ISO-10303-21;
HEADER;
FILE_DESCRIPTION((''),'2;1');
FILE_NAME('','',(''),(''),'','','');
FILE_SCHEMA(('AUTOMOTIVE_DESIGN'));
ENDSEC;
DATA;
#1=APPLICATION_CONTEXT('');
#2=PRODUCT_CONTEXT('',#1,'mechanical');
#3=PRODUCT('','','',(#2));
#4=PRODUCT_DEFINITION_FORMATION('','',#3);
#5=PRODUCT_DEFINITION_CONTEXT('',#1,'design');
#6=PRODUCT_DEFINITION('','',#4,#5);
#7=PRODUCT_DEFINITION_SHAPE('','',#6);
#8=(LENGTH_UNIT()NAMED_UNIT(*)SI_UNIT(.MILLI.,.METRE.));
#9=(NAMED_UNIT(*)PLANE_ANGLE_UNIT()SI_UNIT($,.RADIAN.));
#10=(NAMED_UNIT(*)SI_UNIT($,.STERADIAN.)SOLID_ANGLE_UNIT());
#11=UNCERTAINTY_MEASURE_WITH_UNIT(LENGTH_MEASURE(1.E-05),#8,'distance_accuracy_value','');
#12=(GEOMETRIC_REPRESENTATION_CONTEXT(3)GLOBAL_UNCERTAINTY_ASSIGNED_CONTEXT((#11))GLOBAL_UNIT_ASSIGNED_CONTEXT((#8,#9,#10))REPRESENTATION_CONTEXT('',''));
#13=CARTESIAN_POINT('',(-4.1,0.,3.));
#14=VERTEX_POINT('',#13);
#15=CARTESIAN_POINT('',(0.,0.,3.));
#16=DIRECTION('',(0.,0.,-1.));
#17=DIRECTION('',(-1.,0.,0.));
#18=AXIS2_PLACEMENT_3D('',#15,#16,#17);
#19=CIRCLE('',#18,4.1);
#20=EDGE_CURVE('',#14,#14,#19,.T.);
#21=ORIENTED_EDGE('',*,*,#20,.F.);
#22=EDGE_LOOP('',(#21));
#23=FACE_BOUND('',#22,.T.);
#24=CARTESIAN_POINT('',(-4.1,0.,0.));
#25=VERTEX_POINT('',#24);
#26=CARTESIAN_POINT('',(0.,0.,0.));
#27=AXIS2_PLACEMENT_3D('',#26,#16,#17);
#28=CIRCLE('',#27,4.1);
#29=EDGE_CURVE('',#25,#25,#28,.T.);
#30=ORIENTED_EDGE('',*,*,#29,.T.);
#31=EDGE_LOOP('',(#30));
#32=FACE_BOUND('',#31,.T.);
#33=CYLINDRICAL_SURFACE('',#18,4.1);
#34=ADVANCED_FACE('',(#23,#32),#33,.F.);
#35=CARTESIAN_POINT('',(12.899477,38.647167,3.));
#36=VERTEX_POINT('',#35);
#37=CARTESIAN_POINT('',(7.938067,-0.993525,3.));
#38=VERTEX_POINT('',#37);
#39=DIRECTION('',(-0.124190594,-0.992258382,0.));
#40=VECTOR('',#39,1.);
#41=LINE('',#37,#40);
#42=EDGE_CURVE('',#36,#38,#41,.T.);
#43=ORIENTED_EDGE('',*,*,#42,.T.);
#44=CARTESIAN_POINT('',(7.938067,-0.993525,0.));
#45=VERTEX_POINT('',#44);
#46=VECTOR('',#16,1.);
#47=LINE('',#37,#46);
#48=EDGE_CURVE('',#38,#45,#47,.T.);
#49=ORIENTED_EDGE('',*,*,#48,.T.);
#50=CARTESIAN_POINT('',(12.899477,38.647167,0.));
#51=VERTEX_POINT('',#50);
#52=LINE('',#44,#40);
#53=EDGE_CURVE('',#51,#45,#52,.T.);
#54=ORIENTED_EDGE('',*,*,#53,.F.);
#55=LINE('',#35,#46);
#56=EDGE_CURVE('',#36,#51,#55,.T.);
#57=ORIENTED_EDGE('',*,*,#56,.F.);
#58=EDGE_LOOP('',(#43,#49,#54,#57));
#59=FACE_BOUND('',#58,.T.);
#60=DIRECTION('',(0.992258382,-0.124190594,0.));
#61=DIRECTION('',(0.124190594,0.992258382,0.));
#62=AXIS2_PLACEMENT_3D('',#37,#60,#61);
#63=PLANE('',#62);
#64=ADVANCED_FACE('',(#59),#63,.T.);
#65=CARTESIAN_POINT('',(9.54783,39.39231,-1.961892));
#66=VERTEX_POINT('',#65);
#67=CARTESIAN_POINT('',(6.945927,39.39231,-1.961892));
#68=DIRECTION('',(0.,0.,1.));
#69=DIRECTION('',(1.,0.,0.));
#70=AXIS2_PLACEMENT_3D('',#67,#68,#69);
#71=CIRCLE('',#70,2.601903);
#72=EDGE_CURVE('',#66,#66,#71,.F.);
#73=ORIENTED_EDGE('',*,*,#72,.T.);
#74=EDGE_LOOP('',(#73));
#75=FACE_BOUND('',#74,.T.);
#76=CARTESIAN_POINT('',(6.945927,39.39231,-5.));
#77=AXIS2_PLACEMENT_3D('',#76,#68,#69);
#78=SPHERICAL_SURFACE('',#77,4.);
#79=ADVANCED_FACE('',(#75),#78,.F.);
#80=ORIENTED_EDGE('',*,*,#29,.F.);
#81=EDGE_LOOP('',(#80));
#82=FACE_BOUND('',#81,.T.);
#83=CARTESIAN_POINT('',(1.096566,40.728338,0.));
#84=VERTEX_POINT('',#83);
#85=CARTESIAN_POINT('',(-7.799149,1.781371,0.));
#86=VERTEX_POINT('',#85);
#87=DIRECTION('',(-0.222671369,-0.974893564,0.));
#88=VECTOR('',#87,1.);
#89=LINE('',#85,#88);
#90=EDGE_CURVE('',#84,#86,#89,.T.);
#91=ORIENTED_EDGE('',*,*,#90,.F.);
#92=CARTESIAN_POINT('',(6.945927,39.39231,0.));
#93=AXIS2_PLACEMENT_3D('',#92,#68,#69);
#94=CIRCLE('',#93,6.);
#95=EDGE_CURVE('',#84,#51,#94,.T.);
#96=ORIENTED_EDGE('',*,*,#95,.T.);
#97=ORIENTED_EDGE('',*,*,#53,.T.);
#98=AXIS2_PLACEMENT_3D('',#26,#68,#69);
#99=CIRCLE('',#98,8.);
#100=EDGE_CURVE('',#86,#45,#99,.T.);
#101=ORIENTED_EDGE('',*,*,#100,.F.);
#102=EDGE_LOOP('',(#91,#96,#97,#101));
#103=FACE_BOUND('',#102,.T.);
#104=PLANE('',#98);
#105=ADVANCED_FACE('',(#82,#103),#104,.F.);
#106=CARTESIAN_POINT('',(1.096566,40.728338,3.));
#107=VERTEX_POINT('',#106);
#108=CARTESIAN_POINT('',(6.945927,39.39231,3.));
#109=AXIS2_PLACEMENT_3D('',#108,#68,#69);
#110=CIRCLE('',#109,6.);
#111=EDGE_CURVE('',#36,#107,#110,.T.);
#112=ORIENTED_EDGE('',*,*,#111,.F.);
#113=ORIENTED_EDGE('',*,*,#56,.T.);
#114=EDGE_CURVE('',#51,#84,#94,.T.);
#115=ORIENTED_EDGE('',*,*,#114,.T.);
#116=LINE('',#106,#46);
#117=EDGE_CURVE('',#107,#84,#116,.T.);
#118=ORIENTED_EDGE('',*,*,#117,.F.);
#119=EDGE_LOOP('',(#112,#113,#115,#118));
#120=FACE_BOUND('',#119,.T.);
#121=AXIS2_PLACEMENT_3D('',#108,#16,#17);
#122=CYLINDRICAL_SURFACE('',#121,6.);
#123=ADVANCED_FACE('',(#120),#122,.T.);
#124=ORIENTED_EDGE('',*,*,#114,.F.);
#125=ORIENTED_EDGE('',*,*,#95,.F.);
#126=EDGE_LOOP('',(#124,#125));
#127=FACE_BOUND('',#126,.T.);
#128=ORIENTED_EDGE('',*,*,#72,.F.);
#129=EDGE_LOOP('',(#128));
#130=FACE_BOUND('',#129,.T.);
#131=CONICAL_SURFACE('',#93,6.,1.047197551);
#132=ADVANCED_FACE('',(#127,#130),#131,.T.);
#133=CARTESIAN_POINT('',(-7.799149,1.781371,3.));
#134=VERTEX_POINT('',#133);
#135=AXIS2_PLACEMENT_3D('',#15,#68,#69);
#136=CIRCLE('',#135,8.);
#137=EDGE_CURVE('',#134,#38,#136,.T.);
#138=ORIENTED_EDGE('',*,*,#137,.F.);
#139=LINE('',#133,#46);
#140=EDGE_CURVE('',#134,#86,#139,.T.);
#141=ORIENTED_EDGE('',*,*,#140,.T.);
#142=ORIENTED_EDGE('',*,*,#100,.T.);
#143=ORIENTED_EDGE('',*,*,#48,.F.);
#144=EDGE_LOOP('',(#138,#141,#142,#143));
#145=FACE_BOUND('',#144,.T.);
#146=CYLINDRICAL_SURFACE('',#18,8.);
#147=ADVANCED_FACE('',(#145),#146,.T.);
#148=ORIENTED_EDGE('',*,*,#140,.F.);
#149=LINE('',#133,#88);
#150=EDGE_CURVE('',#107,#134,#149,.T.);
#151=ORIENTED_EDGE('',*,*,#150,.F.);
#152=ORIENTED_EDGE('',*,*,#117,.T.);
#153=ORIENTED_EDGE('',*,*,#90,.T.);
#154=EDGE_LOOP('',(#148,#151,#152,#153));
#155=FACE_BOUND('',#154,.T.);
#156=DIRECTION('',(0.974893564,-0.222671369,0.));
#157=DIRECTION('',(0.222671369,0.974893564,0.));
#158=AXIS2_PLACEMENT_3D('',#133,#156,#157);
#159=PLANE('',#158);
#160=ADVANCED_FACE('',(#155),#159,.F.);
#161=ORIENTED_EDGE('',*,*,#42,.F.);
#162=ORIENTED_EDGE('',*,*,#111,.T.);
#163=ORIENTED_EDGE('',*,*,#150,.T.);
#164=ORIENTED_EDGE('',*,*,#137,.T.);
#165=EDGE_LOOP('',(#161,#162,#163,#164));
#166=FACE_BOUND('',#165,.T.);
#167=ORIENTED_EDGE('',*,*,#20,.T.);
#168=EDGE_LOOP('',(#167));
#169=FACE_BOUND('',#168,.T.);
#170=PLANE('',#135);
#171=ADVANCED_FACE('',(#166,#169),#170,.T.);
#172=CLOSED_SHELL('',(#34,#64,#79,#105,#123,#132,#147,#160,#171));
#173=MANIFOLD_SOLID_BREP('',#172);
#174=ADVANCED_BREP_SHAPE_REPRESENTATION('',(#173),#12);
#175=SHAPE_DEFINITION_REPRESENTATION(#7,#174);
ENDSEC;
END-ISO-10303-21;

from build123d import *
from build123d.topology import SkipClean

# Parameters (mm, degrees)
SKETCH1_R           = 6
SKETCH1_R_2         = 8
BOSS_EXTRUDE1_DEPTH = 3
BOSS_EXTRUDE2_START = -2
SKETCH1_3_R         = 6
BOSS_EXTRUDE2_DEPTH = 2
SKETCH6_R           = 4.1
CUT_EXTRUDE1_DEPTH  = 3


with BuildPart() as part:
    # Sketch1 → Boss-Extrude1 (new body)
    with BuildSketch(Plane.XY):
        with BuildLine():
            ThreePointArc((12.899477, 38.647167), (5.904038, 33.483464), (1.096566, 40.728338))
            Line((1.096566, 40.728338), (-7.799149, 1.781371))
            ThreePointArc((-7.799149, 1.781371), (0.896329, 7.949629), (8, 0))
            ThreePointArc((8, 0), (7.984502, -0.497727), (7.938067, -0.993525))
            Line((7.938067, -0.993525), (12.899477, 38.647167))
        make_face()
        with Locations((6.945927, 39.39231)):
            Circle(SKETCH1_R)
        Circle(SKETCH1_R_2)
    extrude(amount=BOSS_EXTRUDE1_DEPTH)

    # Sketch1<3> → Boss-Extrude2 (add)
    with BuildSketch(Plane.XY.offset(BOSS_EXTRUDE2_START)):
        with Locations(Location((6.945927, 39.39231, 0), (0, 0, 167.134016))):
            Circle(SKETCH1_3_R)
    extrude(amount=BOSS_EXTRUDE2_DEPTH)

    # Sketch3 → Cut-Revolve1 (revolve, cut)
    with SkipClean():  # the faces are left unmerged after this step: merging them gives an invalid solid
        with BuildSketch(Plane(origin=(6.945927, 0, 0), x_dir=(0, 0, -1), z_dir=(1, 0, 0))):
            with BuildLine():
                ThreePointArc((9, 39.39231), (7.828427, 42.220737), (5, 43.39231))
                Line((5, 43.39231), (5, 35.39231))
                ThreePointArc((5, 35.39231), (7.828427, 36.563883), (9, 39.39231))
            make_face()
            with BuildLine():
                Line((5, 35.39231), (5, 43.39231))
                ThreePointArc((5, 43.39231), (1, 39.39231), (5, 35.39231))
            make_face()
        revolve(axis=Axis((6.945927, 43.39231, -5), (0, -1, 0)), mode=Mode.SUBTRACT)

    # Chamfer1: read off the stored shape, not the designer's step
    # Chamfer1 outline → Chamfer1 (revolve, cut)
    with SkipClean():  # the faces are left unmerged after this step: merging them gives an invalid solid
        with BuildSketch(Plane(origin=(6.945927, 39.39231, 0), x_dir=(1, 0, 0), z_dir=(0, -1, 0))):
            Polygon((2.601903, -1.961892), (2.601903, -2), (6, -2), (6, 0), align=None)
        revolve(axis=Axis((6.945927, 39.39231, 0), (0, 0, 1)), mode=Mode.SUBTRACT)

    # Sketch6 → Cut-Extrude1 (cut)
    with SkipClean():  # the faces are left unmerged after this step: merging them gives an invalid solid
        with BuildSketch(Plane(origin=(0, 0, 0), x_dir=(-1, 0, 0), z_dir=(0, 0, -1))):
            Circle(SKETCH6_R)
        extrude(amount=-CUT_EXTRUDE1_DEPTH, mode=Mode.SUBTRACT)


solid = part.part
